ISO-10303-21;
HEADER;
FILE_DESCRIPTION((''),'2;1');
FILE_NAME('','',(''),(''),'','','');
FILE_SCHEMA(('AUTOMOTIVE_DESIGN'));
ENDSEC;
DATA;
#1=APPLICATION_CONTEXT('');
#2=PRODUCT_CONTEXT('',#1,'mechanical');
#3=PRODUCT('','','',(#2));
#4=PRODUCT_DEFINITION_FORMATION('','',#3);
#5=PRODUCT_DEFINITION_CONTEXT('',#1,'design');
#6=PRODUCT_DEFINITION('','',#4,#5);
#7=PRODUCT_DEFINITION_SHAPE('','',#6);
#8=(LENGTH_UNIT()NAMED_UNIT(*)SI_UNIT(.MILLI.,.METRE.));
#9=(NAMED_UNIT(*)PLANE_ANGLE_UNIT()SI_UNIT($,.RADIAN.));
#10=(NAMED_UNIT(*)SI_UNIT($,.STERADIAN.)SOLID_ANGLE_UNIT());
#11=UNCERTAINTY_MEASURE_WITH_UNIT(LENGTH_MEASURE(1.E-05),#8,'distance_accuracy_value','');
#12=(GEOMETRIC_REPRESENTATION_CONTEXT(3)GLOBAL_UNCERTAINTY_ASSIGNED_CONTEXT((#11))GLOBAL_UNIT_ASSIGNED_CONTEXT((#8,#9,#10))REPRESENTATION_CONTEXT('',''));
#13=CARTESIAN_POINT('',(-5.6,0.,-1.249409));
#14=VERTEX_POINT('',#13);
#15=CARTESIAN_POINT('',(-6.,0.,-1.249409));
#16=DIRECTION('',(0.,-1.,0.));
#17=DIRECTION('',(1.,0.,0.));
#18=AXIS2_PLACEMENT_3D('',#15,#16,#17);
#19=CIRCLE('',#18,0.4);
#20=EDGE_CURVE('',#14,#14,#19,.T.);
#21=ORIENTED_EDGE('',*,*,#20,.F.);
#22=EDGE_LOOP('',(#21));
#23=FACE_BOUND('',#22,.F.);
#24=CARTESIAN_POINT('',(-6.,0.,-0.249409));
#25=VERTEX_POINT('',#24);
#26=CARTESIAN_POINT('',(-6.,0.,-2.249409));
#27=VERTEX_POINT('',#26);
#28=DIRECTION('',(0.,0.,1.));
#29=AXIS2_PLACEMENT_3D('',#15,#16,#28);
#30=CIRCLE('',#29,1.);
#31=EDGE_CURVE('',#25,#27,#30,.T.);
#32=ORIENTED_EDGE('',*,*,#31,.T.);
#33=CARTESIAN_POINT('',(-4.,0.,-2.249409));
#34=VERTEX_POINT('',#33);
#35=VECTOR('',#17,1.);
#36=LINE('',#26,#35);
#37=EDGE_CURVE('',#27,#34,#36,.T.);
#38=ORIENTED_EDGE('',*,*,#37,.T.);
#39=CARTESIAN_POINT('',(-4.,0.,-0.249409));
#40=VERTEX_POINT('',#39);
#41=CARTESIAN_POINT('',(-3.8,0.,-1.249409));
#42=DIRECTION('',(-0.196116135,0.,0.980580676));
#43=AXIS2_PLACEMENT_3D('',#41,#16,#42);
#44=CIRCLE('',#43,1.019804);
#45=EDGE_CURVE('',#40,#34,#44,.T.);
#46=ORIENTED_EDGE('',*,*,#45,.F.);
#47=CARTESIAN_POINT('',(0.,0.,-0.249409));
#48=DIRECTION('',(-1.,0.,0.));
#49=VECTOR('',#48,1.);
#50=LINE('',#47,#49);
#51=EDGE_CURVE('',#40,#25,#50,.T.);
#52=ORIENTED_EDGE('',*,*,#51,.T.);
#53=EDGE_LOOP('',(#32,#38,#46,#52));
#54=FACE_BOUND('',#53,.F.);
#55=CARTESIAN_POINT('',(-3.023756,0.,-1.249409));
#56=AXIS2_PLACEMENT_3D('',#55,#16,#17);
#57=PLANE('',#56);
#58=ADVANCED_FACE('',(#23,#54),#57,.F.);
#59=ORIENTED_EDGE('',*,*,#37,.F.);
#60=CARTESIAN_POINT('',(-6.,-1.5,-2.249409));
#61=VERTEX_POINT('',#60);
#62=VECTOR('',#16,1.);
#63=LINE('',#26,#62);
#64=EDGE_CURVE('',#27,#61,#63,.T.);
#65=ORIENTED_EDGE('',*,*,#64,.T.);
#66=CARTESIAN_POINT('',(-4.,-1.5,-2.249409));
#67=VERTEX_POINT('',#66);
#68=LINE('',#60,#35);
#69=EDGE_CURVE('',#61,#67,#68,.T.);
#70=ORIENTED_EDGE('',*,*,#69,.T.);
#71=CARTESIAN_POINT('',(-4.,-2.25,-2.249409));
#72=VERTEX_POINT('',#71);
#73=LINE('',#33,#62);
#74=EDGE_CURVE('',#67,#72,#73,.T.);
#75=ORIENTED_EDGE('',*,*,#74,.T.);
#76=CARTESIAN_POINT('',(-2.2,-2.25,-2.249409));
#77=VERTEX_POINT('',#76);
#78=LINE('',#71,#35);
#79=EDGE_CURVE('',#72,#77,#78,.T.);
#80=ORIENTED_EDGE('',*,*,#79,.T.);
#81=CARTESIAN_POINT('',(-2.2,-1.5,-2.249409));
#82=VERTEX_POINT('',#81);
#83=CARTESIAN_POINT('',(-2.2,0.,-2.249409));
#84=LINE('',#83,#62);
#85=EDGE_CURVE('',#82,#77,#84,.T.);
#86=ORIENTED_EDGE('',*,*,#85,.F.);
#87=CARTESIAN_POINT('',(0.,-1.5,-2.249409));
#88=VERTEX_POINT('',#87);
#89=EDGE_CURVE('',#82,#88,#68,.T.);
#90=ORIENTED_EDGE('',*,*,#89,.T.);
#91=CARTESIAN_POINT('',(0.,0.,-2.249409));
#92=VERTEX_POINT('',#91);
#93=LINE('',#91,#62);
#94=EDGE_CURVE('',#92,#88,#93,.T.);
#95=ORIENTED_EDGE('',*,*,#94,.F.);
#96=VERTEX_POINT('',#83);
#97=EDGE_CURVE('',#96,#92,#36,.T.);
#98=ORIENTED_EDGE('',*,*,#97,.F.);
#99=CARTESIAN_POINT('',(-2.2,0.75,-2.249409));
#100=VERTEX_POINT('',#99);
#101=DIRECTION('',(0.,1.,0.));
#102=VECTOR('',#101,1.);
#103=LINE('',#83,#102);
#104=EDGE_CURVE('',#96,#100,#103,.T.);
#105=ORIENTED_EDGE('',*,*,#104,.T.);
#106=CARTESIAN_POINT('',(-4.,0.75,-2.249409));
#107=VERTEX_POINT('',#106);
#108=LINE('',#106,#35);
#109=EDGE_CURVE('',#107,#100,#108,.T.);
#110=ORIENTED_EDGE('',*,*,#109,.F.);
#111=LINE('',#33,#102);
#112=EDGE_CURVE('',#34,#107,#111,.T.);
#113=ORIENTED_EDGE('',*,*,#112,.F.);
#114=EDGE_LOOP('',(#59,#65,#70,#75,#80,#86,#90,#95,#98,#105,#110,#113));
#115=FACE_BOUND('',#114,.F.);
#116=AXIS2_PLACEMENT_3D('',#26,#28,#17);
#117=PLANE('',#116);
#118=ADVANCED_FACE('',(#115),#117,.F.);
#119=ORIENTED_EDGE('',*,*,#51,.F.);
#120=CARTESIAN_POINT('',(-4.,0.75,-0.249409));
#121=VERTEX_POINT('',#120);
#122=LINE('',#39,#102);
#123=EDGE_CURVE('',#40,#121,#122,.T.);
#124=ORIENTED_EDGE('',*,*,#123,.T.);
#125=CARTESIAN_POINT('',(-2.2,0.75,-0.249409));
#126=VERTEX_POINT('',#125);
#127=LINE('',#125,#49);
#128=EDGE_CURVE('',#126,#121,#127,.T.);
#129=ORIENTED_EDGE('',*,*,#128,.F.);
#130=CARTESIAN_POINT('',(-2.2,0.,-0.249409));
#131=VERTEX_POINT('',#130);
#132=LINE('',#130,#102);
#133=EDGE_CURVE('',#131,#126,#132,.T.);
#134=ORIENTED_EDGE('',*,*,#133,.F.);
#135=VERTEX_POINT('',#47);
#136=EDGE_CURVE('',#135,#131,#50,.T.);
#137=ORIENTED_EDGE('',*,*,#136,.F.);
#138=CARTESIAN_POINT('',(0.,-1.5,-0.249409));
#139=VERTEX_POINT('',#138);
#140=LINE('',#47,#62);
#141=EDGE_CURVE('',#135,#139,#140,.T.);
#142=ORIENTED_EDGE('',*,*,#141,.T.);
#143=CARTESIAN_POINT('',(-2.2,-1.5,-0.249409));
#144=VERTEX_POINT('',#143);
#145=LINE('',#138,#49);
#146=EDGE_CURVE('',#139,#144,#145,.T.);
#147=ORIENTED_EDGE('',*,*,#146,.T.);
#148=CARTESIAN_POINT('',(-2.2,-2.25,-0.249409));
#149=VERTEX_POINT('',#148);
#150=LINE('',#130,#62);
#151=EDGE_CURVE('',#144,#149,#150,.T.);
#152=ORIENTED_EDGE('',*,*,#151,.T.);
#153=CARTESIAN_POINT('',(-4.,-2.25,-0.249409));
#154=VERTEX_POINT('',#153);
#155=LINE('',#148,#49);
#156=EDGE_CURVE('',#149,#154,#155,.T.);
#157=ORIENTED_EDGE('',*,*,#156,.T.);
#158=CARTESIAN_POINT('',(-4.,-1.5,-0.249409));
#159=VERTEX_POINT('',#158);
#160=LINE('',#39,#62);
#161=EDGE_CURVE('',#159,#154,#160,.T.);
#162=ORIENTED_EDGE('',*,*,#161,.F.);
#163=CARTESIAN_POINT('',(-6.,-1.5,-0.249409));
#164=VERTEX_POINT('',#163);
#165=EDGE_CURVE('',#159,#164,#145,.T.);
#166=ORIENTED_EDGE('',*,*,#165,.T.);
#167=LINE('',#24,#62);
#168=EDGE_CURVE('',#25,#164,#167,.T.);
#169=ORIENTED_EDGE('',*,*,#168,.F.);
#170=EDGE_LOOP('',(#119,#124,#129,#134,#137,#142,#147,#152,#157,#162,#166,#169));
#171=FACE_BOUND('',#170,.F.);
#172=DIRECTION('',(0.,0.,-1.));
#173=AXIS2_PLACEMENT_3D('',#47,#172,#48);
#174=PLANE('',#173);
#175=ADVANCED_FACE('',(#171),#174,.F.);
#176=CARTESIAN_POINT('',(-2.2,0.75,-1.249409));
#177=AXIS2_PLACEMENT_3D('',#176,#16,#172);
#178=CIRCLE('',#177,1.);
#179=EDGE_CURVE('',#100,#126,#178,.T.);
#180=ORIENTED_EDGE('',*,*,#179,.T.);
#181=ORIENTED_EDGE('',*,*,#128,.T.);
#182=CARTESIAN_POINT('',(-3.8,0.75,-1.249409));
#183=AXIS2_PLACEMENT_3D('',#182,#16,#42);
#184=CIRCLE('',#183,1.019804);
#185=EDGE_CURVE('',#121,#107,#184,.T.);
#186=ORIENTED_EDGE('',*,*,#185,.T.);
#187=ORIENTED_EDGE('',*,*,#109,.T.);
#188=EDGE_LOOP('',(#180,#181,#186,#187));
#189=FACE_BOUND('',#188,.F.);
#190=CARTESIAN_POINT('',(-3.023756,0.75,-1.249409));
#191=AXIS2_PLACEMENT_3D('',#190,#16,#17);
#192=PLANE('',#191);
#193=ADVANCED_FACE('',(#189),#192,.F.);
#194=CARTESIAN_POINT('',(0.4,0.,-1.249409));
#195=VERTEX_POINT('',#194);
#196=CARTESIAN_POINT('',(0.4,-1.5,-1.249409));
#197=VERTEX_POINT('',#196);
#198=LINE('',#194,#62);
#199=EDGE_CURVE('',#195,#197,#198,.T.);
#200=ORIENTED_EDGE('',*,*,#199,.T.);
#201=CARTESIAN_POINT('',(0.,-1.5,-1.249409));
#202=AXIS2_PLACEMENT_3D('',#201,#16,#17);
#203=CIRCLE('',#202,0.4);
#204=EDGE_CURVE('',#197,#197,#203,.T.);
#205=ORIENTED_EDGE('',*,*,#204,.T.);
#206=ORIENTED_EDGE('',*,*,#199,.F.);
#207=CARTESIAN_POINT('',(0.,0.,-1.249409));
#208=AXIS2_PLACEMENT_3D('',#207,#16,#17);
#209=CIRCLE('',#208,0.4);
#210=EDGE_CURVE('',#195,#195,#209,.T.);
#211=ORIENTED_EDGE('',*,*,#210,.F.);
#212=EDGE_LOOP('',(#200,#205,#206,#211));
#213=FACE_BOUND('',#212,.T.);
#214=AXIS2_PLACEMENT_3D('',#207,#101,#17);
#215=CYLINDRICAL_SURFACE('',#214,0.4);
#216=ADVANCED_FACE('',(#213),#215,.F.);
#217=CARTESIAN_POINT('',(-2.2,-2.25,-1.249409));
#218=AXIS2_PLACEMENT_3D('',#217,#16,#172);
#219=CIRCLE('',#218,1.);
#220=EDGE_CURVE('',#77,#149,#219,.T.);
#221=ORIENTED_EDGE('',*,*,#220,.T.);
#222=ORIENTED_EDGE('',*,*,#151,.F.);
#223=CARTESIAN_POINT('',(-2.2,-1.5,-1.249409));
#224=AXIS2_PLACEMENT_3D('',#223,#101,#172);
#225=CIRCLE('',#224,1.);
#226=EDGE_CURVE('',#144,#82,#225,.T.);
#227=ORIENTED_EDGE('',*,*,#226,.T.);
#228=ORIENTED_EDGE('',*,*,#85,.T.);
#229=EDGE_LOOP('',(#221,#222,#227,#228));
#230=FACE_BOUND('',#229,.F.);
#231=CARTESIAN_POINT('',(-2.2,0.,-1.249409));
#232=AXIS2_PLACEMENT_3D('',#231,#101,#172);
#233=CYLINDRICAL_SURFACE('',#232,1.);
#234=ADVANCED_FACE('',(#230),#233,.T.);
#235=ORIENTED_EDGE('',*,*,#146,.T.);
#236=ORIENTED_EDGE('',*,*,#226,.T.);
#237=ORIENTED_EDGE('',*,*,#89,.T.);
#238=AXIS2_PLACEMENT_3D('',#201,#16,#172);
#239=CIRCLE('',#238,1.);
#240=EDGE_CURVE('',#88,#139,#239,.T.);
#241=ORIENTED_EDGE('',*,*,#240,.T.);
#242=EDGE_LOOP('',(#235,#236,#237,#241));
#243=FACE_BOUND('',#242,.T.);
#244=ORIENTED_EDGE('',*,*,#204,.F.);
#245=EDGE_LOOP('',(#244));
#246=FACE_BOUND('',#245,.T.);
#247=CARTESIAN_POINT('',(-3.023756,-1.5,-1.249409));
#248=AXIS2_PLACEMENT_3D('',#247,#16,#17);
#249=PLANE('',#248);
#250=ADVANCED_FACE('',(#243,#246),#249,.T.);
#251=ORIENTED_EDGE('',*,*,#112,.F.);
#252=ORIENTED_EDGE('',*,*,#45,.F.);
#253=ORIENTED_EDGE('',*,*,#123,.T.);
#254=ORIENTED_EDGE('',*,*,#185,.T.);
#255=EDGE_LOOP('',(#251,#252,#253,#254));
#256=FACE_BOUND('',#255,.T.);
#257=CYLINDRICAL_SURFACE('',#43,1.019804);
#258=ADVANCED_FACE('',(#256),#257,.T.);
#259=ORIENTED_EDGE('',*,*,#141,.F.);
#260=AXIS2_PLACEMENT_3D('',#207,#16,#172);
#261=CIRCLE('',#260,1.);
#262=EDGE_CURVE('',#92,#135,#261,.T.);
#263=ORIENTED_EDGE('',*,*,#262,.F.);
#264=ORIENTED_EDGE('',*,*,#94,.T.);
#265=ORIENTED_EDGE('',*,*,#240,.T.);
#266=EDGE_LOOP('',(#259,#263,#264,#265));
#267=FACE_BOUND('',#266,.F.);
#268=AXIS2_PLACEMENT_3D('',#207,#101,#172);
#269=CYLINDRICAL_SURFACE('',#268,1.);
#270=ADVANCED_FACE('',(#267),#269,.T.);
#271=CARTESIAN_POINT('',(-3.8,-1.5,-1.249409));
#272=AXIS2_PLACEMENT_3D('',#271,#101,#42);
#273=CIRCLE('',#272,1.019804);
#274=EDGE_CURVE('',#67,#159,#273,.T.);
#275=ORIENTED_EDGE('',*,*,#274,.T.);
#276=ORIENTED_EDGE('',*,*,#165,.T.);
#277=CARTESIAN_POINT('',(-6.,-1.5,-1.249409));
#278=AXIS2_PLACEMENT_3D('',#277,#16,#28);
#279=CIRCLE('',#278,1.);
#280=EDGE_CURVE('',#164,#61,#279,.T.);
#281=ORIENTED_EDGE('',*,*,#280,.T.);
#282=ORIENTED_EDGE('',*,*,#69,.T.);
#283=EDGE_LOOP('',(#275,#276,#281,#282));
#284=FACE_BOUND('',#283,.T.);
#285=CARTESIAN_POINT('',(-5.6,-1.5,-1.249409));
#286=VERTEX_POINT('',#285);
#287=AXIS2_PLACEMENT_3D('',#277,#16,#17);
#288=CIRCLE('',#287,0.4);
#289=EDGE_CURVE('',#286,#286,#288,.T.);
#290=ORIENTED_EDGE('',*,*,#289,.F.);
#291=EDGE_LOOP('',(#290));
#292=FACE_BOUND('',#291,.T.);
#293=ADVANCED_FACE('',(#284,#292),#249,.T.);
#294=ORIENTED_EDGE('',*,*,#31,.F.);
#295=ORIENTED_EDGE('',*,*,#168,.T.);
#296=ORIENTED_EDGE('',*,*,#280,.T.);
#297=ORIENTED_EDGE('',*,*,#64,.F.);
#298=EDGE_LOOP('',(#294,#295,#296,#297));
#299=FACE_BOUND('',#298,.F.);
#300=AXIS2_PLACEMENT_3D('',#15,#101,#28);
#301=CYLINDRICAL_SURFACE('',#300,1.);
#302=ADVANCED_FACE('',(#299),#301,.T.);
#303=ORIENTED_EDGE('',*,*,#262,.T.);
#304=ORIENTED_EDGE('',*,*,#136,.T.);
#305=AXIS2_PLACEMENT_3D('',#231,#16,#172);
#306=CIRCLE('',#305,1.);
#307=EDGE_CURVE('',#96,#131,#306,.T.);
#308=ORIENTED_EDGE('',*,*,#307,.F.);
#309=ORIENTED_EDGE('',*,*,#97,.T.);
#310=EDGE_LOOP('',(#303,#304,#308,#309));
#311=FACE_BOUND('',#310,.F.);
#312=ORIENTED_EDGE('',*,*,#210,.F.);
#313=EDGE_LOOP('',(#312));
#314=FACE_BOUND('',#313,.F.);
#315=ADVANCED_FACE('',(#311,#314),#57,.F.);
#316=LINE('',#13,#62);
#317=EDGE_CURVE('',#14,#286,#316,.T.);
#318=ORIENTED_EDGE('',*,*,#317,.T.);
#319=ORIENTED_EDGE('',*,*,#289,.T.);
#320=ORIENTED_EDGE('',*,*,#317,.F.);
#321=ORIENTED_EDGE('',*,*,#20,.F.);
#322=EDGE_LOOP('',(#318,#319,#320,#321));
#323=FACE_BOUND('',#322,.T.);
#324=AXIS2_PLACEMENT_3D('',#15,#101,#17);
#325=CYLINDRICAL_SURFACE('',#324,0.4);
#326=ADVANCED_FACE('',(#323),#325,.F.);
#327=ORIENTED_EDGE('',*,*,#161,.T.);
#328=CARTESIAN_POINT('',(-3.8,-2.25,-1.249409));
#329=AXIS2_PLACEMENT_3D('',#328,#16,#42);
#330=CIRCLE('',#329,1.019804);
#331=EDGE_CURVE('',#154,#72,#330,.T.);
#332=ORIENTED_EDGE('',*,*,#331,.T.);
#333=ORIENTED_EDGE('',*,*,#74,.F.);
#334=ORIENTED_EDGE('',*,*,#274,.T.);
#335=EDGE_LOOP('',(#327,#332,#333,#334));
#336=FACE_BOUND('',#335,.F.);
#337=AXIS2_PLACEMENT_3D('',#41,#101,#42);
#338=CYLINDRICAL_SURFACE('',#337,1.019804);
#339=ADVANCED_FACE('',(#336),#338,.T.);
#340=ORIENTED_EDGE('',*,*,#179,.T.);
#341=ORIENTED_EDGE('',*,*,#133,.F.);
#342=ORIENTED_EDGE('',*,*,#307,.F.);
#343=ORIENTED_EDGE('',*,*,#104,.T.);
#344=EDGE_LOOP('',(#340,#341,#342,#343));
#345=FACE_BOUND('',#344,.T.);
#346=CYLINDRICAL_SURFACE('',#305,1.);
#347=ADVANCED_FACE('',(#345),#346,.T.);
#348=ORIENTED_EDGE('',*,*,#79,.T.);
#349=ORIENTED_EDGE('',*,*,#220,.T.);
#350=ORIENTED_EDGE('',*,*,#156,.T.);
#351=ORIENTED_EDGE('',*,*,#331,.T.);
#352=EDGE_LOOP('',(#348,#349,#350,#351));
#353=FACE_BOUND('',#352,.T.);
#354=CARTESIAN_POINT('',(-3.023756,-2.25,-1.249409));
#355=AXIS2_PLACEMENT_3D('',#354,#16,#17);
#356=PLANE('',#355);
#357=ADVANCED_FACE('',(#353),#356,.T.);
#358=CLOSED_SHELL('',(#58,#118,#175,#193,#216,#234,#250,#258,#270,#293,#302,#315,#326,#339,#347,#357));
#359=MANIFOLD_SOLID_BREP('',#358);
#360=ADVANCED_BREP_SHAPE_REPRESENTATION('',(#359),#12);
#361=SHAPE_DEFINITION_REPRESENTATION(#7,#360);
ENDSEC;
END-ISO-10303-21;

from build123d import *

# Parameters (mm, degrees)
F0_R          = 0.4
F1_DEPTH      = 1.5
F2_DEPTH      = 0.75
F2_DEPTH_BACK = 2.25


# Not quite as in the source:
# - a feature names something its author has since deleted; it is built from what else it names


with BuildPart() as f1:
    # F0 (on Front) → F1 (new body)
    with BuildSketch(Plane.XZ):
        with BuildLine():
            ThreePointArc((-2.2, -2.24940907), (-1.2, -1.24940907), (-2.2, -0.24940907))
            Line((-2.2, -0.24940907), (-4, -0.24940907))
            ThreePointArc((-4, -0.24940907), (-4.8198039027, -1.24940907), (-4, -2.24940907))
            Line((-4, -2.24940907), (-2.2, -2.24940907))
        make_face()
        with BuildLine():
            Line((0, -0.24940907), (-1, -0.24940907))
            Line((-1, -0.24940907), (-2.2, -0.24940907))
            ThreePointArc((-2.2, -0.24940907), (-1.2, -1.24940907), (-2.2, -2.24940907))
            Line((-2.2, -2.24940907), (-1, -2.24940907))
            Line((-1, -2.24940907), (0, -2.24940907))
            ThreePointArc((0, -2.24940907), (1, -1.24940907), (0, -0.24940907))
        make_face()
        with Locations((0, -1.24940907)):
            Circle(F0_R, mode=Mode.SUBTRACT)
        with BuildLine():
            ThreePointArc((-4, -2.24940907), (-4.8198039027, -1.24940907), (-4, -0.24940907))
            Line((-4, -0.24940907), (-6, -0.24940907))
            ThreePointArc((-6, -0.24940907), (-7, -1.24940907), (-6, -2.24940907))
            Line((-6, -2.24940907), (-4, -2.24940907))
        make_face()
        with Locations((-6, -1.24940907)):
            Circle(F0_R, mode=Mode.SUBTRACT)
    extrude(amount=F1_DEPTH)

    # F0 (on Front) → F2 (join, two sides)
    with BuildSketch(Plane.XZ) as f2_sk:
        with BuildLine():
            ThreePointArc((-2.2, -2.24940907), (-1.2, -1.24940907), (-2.2, -0.24940907))
            Line((-2.2, -0.24940907), (-4, -0.24940907))
            ThreePointArc((-4, -0.24940907), (-4.8198039027, -1.24940907), (-4, -2.24940907))
            Line((-4, -2.24940907), (-2.2, -2.24940907))
        make_face()
    extrude(amount=-F2_DEPTH)
    extrude(f2_sk.sketch, amount=F2_DEPTH_BACK)


solid = f1.part
